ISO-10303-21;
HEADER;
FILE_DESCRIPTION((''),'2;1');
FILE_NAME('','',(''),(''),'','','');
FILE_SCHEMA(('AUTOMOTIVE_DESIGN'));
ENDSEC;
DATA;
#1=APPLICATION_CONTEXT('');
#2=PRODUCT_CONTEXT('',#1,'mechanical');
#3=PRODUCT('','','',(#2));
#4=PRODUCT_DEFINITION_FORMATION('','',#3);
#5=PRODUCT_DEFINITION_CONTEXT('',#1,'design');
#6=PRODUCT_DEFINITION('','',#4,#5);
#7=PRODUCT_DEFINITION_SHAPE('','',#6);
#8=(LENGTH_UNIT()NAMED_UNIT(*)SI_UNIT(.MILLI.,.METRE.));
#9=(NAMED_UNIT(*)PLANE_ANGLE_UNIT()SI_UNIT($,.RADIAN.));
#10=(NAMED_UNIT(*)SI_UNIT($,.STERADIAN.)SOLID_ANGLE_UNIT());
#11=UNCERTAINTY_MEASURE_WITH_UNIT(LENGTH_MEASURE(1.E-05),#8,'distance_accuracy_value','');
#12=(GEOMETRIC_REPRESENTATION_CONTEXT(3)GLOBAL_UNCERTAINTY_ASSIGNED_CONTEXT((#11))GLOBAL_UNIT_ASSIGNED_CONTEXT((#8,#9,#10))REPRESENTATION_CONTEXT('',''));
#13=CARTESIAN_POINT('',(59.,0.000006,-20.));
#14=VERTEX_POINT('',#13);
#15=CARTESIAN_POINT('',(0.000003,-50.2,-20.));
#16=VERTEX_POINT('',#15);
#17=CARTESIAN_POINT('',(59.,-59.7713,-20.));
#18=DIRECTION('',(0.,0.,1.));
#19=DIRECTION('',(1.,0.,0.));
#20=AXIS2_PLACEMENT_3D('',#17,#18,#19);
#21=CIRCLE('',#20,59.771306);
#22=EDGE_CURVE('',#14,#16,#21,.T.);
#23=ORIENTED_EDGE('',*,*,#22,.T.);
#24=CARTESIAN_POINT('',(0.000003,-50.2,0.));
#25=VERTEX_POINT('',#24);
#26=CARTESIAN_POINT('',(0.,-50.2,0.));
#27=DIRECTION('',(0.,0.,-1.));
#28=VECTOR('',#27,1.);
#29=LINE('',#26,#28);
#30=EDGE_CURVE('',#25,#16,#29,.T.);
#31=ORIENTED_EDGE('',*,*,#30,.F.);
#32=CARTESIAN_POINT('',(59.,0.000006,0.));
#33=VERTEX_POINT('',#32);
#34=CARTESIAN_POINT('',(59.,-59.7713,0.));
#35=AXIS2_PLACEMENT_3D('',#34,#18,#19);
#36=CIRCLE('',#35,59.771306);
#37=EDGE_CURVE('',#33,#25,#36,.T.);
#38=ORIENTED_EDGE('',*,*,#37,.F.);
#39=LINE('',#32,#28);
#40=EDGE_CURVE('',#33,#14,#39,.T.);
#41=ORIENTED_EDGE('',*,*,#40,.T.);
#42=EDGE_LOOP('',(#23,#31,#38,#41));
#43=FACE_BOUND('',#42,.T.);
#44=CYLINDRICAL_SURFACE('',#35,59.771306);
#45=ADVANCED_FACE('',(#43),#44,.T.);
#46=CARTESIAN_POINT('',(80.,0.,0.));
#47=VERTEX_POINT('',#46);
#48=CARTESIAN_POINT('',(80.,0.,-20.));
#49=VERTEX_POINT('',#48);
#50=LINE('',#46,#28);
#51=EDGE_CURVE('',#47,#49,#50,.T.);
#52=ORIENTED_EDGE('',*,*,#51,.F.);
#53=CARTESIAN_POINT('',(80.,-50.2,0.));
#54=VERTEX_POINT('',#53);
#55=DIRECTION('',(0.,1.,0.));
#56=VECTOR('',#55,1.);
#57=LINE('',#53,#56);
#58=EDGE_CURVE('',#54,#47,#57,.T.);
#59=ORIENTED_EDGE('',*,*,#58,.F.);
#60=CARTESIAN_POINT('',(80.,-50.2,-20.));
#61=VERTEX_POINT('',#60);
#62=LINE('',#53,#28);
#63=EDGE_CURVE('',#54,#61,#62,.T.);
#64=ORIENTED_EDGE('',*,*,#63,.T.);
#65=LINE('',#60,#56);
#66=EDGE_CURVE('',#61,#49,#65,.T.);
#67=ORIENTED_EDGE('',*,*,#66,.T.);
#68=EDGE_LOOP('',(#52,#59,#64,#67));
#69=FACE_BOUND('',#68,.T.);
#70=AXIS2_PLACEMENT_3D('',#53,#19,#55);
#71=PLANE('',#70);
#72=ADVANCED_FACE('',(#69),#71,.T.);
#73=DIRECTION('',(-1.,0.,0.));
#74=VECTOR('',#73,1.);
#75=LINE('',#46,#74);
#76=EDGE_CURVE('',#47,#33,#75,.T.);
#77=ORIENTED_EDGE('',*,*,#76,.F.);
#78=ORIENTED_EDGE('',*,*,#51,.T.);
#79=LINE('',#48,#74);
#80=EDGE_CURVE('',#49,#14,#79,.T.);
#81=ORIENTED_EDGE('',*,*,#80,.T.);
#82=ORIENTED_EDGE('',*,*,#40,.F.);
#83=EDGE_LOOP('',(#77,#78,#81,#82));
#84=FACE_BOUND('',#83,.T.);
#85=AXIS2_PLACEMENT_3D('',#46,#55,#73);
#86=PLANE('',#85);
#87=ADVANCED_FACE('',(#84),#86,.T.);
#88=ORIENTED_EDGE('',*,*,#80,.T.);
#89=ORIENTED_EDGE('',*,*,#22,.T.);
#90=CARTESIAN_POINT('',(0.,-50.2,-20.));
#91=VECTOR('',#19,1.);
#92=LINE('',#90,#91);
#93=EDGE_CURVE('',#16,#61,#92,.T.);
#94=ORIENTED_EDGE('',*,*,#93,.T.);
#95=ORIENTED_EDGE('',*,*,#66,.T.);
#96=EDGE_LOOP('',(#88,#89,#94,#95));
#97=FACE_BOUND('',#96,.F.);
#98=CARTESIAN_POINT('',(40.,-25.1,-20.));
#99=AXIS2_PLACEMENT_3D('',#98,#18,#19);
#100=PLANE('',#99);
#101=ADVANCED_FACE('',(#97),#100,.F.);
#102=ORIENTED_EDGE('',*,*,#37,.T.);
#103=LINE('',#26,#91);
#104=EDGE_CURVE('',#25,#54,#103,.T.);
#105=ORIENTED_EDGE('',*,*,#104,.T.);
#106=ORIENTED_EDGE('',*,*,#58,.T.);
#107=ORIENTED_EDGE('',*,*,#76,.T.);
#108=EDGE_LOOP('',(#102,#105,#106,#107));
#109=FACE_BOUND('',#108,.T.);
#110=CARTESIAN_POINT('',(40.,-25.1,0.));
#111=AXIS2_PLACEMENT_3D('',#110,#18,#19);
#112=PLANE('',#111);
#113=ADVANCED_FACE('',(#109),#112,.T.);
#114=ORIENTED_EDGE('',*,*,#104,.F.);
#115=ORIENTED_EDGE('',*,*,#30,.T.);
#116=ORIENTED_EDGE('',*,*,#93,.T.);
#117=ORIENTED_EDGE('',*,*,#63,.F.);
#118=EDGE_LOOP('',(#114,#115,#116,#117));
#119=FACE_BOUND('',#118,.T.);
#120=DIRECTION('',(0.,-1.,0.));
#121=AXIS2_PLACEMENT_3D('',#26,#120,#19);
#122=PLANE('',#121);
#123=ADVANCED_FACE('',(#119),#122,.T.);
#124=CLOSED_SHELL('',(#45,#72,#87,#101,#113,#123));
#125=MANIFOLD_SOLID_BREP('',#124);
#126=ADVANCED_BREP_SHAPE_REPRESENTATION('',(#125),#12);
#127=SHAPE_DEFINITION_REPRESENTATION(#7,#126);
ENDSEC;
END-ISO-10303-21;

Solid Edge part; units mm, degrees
sketch "Sketch1" plane through (0, 0, 0) normal (0, 0, 1) x (1, 0, 0)
  line L0 (0, -50.2) -> (80, -50.2)
  line L1 (80, -50.2) -> (80, 0)
  line L2 (80, 0) -> (0, 0)
  line L3 (0, 0) -> (0, -50.2)
extrude "Protrusion1" add sketch "Sketch1" against normal blind 20
sketch "Sketch2" plane through (40, -25.1, 0) normal (0, 0, 1) x (1, 0, 0)
  line L0 (-40, 25.1) -> (19, 25.1)
  arc A0 (19, 25.1) -> (-40, -25.1) centre (19, -34.6713) ccw
  line L1 (-40, 25.1) -> (-40, -25.1)
extrude "ExtrudedCutout_1" cut sketch "Sketch2" against normal blind 20
